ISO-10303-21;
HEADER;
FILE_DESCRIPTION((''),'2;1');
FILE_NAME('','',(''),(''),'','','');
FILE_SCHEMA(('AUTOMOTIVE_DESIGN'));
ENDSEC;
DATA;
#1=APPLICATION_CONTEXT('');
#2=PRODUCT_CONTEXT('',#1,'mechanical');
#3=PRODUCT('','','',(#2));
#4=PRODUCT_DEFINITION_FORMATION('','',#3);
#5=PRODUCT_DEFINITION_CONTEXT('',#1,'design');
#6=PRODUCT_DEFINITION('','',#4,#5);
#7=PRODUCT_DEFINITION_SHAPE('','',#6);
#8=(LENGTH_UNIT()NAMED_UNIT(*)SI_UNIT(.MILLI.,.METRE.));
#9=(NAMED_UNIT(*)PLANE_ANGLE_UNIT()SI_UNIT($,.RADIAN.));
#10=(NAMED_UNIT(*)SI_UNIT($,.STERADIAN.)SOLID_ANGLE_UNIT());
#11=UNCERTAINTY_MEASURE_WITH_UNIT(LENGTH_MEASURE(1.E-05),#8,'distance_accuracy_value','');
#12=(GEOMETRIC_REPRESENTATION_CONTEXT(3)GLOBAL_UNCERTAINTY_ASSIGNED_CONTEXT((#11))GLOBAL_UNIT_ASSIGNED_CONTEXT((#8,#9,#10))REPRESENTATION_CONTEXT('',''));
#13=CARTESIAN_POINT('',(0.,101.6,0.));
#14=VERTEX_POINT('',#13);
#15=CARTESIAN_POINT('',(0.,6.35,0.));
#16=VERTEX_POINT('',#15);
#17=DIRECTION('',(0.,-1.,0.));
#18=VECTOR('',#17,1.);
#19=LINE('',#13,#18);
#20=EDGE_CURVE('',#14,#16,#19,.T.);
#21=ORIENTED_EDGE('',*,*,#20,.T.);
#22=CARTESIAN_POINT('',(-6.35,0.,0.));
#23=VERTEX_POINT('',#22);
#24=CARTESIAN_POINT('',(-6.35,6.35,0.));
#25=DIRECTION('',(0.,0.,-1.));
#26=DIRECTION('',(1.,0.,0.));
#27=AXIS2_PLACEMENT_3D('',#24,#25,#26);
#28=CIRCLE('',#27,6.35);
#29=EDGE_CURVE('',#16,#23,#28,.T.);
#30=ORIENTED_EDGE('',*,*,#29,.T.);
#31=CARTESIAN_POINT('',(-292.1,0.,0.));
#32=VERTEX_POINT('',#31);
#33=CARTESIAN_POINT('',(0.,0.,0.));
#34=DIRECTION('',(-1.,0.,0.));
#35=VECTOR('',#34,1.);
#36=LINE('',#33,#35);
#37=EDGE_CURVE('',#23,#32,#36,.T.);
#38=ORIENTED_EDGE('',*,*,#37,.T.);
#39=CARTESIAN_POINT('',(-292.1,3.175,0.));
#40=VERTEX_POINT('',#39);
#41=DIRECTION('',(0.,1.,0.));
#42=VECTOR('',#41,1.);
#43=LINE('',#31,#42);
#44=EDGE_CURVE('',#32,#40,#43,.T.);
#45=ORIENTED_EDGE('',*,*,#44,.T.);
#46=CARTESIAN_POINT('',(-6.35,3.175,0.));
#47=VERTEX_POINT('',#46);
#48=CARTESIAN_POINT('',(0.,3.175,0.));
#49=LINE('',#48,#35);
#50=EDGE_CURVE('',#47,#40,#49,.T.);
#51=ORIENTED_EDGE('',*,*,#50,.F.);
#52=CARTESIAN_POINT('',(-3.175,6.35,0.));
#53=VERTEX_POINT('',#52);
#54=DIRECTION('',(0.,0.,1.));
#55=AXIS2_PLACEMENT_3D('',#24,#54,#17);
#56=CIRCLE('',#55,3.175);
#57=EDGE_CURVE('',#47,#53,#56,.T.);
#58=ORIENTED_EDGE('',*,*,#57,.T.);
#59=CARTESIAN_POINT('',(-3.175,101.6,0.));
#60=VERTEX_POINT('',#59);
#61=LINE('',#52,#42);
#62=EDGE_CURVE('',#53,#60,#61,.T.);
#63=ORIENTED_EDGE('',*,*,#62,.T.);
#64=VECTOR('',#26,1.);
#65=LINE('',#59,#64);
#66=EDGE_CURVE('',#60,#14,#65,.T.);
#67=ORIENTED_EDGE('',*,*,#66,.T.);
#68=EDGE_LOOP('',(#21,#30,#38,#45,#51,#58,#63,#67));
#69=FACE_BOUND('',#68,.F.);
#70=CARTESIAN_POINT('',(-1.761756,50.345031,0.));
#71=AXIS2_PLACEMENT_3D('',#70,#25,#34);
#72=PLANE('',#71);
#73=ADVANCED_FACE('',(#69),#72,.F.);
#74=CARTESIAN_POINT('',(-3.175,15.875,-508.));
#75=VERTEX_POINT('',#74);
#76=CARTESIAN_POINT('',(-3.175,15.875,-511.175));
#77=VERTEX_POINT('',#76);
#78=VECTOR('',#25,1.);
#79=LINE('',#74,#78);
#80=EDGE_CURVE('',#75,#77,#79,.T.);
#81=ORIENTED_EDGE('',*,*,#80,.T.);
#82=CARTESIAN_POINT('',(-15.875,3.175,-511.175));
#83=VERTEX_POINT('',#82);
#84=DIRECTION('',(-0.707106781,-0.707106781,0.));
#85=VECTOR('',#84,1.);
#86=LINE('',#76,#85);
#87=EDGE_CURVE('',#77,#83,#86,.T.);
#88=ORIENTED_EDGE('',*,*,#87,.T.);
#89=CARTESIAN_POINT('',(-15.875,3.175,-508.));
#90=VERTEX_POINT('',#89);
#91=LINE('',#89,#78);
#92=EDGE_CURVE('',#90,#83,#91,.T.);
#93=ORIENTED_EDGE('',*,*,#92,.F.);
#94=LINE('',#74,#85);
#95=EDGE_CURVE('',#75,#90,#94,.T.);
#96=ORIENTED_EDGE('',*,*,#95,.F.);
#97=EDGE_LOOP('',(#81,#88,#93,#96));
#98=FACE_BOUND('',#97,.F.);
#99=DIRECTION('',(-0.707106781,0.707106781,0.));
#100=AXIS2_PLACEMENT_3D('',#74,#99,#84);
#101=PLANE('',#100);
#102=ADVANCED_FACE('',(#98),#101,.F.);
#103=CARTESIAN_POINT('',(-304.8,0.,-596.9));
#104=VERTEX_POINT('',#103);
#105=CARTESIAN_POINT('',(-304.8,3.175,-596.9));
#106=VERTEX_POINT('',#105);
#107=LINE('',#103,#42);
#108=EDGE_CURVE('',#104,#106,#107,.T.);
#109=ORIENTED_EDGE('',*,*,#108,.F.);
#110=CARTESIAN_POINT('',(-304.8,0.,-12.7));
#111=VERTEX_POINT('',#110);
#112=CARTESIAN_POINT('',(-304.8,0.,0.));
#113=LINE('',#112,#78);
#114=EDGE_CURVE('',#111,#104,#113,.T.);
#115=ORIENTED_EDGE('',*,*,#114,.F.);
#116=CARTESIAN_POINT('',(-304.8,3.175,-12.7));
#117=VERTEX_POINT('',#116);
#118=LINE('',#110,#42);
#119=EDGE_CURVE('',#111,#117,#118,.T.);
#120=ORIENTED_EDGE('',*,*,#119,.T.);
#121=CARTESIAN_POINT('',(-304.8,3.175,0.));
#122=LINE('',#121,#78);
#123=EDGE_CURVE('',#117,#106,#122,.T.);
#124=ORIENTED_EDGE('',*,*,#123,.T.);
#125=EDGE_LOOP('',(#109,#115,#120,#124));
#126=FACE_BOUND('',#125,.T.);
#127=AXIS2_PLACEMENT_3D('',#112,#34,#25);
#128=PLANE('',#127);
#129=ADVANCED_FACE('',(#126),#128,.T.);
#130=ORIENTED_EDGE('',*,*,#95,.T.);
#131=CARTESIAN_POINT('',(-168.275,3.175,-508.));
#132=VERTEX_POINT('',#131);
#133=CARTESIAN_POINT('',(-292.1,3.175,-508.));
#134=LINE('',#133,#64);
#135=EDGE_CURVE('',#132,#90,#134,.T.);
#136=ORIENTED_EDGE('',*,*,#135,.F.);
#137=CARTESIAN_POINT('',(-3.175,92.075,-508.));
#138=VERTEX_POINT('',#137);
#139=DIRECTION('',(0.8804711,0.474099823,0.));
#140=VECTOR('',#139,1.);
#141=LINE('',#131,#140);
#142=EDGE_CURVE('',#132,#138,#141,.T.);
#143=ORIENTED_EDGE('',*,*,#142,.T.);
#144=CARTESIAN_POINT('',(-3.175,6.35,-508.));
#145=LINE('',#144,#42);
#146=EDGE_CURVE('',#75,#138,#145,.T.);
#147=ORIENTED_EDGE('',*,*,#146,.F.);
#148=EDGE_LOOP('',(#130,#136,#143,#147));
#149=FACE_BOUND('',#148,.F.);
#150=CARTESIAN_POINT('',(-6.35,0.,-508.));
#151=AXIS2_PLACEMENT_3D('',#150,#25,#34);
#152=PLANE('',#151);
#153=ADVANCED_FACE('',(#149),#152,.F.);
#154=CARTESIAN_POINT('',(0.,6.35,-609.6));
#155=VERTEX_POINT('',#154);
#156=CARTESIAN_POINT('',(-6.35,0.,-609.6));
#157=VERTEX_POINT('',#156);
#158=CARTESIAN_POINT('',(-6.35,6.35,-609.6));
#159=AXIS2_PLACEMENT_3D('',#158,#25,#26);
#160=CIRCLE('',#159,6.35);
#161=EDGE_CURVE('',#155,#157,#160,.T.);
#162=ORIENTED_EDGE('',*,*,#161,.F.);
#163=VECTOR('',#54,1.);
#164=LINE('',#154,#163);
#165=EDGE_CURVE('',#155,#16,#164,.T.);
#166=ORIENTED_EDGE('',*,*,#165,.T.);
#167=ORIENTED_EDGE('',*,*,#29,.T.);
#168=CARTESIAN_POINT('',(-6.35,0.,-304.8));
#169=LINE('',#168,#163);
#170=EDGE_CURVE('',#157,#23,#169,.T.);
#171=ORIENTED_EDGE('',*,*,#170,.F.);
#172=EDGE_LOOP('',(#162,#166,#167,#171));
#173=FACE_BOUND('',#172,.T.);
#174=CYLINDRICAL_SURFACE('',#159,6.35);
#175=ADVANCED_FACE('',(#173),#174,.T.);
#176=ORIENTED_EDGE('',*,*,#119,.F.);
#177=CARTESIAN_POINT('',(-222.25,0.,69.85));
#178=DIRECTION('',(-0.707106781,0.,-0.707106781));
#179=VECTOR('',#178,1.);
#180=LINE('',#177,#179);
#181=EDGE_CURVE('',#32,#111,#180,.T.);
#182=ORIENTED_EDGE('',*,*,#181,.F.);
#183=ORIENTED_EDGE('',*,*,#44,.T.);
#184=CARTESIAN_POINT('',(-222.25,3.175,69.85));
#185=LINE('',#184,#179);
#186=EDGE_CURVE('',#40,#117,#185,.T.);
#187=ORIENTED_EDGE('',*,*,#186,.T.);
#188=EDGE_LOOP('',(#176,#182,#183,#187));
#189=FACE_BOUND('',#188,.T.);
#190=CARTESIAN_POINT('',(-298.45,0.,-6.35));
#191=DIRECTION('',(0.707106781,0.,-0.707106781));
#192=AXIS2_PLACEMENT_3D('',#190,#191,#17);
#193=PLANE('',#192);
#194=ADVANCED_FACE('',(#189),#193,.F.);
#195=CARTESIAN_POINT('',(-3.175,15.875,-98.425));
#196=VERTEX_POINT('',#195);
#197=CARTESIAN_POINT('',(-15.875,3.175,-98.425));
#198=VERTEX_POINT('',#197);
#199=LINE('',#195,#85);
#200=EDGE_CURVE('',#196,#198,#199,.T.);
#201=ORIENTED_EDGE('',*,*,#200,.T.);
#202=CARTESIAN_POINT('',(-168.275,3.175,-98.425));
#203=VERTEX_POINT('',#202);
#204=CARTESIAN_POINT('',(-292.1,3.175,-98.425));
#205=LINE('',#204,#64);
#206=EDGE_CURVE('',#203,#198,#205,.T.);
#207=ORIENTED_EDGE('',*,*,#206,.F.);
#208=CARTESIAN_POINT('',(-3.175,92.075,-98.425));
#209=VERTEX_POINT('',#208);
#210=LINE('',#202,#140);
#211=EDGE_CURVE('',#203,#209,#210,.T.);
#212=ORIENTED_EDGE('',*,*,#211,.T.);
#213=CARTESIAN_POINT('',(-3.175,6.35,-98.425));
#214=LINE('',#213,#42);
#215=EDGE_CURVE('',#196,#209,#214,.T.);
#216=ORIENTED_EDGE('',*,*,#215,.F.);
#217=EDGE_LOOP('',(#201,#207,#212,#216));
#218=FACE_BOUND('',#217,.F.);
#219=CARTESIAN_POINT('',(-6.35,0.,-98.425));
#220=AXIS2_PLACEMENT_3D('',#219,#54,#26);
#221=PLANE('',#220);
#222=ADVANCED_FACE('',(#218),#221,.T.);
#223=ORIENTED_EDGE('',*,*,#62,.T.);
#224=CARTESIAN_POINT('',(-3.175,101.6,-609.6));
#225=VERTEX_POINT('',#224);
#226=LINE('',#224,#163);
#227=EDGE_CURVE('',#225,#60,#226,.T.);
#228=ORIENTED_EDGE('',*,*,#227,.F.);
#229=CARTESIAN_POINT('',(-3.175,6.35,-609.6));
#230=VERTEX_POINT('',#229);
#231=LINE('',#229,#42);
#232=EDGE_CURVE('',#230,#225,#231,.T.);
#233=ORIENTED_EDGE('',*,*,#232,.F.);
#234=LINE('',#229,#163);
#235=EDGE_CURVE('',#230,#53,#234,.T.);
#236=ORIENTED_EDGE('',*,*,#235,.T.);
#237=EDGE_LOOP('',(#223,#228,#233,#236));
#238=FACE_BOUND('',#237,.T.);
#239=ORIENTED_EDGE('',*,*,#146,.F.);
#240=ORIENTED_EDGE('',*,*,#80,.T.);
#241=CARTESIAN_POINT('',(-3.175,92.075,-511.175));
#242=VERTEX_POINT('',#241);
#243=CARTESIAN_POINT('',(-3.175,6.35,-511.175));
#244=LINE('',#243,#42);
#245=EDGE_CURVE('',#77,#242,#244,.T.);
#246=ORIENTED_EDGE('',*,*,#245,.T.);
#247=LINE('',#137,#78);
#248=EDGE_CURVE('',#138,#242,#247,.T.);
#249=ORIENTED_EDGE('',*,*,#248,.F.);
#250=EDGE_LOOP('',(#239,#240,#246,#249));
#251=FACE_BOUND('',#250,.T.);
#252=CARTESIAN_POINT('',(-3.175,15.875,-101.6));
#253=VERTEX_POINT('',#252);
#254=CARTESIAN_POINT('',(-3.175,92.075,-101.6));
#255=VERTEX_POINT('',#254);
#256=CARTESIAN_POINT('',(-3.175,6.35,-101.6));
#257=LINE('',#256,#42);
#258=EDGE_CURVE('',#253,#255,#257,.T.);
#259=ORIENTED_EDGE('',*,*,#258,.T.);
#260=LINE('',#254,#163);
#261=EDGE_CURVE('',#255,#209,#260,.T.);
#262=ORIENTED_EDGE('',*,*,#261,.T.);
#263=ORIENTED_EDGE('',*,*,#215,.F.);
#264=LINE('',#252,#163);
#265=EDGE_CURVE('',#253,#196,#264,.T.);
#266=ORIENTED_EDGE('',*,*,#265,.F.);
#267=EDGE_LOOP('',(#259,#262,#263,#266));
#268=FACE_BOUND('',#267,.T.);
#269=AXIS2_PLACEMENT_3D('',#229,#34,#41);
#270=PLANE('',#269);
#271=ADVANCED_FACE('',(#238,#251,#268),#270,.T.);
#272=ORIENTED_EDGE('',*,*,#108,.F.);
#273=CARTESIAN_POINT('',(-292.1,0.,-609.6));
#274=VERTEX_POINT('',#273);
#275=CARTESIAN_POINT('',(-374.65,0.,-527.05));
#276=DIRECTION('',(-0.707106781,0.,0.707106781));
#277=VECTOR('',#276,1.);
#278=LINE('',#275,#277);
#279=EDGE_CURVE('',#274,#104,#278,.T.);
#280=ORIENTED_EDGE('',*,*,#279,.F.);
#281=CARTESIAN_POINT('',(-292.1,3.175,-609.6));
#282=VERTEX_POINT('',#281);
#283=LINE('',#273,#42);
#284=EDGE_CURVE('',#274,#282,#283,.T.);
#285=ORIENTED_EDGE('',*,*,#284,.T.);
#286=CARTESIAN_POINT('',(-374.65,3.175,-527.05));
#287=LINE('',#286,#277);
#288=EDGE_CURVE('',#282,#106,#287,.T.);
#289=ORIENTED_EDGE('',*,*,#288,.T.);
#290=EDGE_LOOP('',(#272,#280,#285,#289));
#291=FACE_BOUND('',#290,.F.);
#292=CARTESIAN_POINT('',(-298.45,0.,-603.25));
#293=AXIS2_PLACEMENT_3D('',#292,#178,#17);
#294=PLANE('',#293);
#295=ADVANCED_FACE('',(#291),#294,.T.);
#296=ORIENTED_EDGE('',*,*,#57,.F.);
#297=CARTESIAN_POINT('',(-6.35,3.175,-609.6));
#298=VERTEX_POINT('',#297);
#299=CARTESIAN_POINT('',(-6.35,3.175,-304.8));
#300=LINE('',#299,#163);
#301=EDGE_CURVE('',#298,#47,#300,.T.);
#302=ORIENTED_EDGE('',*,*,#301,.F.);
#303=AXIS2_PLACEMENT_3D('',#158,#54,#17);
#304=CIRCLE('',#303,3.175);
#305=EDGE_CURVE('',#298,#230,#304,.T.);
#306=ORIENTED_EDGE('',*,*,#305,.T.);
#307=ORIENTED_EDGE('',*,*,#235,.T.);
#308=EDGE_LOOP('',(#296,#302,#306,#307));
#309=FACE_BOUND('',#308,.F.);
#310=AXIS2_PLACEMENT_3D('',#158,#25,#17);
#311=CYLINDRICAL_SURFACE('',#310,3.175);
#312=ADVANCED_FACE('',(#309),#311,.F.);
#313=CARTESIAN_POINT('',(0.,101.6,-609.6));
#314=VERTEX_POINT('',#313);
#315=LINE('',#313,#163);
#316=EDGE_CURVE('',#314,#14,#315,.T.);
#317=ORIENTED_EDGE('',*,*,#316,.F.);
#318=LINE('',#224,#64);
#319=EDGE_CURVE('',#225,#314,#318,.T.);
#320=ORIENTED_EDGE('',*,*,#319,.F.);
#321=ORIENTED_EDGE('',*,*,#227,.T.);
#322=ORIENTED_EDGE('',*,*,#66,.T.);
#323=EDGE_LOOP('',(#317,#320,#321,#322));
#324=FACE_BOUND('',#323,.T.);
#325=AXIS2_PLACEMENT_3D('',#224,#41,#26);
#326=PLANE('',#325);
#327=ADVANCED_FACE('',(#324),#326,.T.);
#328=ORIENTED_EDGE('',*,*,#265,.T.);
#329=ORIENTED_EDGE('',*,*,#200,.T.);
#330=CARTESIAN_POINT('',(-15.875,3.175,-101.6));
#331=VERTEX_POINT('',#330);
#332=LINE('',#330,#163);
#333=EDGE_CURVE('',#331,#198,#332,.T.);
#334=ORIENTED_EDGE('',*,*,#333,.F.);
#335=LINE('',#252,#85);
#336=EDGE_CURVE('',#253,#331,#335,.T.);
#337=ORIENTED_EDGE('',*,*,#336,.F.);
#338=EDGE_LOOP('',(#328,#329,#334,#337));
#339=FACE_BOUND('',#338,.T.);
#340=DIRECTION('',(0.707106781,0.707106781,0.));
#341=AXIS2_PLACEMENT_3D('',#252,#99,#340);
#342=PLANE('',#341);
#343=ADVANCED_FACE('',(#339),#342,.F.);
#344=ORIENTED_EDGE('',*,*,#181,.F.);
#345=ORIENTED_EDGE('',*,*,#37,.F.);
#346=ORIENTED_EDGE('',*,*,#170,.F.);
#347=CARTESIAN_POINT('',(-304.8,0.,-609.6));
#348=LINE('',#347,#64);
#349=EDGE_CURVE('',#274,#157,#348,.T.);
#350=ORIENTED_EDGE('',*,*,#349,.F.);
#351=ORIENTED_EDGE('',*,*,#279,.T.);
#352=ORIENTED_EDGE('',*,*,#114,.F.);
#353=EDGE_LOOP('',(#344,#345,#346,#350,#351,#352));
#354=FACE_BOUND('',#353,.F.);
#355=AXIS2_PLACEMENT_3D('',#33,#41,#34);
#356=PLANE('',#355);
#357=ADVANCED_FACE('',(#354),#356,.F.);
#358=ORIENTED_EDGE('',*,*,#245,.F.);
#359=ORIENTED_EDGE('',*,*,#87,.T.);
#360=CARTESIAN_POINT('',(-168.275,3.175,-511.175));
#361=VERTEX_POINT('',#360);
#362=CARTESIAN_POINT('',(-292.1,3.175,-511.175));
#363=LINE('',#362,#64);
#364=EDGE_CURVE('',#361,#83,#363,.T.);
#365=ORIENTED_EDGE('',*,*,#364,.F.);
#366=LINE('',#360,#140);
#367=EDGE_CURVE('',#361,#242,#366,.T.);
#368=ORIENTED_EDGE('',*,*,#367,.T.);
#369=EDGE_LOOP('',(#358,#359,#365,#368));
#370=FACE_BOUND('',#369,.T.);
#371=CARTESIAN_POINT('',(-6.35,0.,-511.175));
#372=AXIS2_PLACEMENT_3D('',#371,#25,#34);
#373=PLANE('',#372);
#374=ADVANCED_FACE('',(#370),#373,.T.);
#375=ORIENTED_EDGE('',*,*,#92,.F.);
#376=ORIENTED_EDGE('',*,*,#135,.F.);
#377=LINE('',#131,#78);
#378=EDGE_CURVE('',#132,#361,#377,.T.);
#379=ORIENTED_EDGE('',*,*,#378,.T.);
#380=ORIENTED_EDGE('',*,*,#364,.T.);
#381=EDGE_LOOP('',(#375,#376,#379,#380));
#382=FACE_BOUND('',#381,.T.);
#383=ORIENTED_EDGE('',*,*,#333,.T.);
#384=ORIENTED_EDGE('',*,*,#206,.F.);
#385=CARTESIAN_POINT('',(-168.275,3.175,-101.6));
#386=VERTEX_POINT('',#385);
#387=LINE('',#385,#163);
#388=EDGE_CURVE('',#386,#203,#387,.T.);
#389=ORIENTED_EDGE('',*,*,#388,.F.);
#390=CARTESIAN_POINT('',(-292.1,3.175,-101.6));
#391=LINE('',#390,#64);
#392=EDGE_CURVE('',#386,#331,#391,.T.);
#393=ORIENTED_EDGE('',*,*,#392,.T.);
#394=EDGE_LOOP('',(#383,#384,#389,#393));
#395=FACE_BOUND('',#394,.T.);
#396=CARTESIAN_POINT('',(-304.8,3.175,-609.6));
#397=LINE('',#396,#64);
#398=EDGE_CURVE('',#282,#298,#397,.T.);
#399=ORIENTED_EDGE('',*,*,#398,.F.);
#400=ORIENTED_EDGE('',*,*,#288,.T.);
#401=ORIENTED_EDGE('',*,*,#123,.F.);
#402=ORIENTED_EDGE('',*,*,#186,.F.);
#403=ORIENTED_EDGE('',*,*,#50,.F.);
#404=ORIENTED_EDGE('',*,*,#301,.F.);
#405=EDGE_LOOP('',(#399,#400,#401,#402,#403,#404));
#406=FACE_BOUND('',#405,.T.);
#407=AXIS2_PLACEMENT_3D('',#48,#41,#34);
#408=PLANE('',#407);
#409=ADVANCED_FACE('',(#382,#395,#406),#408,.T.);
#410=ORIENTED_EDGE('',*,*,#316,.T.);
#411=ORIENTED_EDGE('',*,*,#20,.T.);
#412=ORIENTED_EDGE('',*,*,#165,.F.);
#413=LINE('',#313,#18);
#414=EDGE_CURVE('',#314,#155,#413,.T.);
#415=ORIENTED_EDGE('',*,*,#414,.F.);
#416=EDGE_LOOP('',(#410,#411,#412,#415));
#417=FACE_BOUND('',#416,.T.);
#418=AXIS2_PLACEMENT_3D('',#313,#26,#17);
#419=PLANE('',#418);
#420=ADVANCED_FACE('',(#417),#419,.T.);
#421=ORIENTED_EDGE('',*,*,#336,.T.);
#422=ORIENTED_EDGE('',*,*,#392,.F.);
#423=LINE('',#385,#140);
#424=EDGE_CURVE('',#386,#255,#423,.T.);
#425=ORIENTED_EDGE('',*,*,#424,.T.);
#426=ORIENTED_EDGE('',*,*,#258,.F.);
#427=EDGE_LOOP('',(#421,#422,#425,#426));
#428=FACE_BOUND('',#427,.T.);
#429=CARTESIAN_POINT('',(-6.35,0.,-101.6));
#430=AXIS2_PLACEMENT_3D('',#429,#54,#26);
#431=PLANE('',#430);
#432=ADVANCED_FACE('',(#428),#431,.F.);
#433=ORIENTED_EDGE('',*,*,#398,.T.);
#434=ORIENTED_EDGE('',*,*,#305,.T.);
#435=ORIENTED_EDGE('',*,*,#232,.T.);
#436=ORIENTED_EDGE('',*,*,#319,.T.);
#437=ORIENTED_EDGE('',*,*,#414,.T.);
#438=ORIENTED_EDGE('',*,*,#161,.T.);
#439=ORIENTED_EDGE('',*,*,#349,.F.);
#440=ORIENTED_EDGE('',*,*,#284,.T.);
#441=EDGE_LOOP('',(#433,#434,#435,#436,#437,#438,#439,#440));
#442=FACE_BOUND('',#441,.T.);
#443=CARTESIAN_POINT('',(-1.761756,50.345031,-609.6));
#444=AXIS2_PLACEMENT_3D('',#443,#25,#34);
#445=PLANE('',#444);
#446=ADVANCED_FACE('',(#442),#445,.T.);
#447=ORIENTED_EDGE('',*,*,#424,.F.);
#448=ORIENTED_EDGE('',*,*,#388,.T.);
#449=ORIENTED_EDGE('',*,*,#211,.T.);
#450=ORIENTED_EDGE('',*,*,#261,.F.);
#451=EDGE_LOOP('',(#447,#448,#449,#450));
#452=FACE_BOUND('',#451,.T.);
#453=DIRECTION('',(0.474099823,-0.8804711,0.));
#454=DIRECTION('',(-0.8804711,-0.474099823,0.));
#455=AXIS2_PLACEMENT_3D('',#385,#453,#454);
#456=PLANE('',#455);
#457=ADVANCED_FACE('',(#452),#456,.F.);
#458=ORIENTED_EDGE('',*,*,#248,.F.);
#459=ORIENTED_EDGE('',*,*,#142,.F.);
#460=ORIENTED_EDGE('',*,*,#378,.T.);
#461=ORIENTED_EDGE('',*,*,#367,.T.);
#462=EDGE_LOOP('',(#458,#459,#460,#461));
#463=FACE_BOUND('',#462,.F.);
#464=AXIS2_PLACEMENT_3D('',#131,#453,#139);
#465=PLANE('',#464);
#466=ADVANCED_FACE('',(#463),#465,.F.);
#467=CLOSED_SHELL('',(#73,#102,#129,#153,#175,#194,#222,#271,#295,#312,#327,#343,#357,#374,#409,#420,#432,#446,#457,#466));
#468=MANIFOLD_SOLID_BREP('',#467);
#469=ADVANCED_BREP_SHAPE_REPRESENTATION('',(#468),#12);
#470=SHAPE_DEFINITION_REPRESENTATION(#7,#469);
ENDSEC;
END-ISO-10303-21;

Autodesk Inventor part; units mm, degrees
ref_plane "YZ Plane" through (0, 0, 0) normal (1, 0, 0) x (0, 1, 0)
ref_plane "XZ Plane" through (0, 0, 0) normal (0, 1, 0) x (-1, 0, 0)
ref_plane "XY Plane" through (0, 0, 0) normal (0, 0, 1) x (1, 0, 0)
sketch "Sketch1" plane through (0, 0, 0) normal (0, 1, 0) x (-1, 0, 0)
  line L0 (0, 0) -> (304.8, 0)
  line L1 (304.8, 0) -> (304.8, -609.6)
  line L2 (304.8, -609.6) -> (0, -609.6)
  line L3 (0, -609.6) -> (0, 0)
  dimension "d0" = 609.6
  dimension "d1" = 304.8
extrude "Plate1" add sketch "Sketch1" along normal blind 3.175
sketch "Sketch2" plane through (-3.175, 0, -609.6) normal (1, 0, 0) x (0, 1, 0)
  line L0 (0, 609.6) -> (0, 0)
  line L1 (0, 0) -> (101.6, 0)
  line L2 (101.6, 0) -> (101.6, 609.6)
  line L3 (101.6, 609.6) -> (0, 609.6)
edge flange "Flange1" height 101.6 angle 90 thickness 3.175 bend radius 3.175 thickness toward (1, 0, 0) relief tear relief width 3.175 relief depth 1.5875 edges at (0, 3.175, -304.8) wall of the first edge with corners at (-3.175, 0, 0) (-3.175, 0, -609.6) (-3.175, 101.6, -609.6) (-3.175, 101.6, 0)
bend "Bend1"
corner "Corner1"
chamfer "Chamfer1" distance 12.7 angle 45 2 edges at (-304.8, 1.5875, -609.6) (-304.8, 1.5875, 0)
ref_plane "Work Plane1" through (-6.35, 0, -508) normal (0, 0, -1) x (-1, 0, 0)
sketch "Sketch3" plane through (-6.35, 0, -508) normal (0, 0, -1) x (-1, 0, 0)
  line L0 (-3.175, 6.35) -> (-3.175, 101.6)
  line L1 (-3.175, 15.875) -> (9.525, 3.175)
  line L2 (285.75, 3.175) -> (0, 3.175)
  line L3 (161.925, 3.175) -> (-3.175, 92.075)
  line L4 (-3.175, 92.075) -> (-3.175, 15.875)
  line L5 (9.525, 3.175) -> (161.925, 3.175)
  point P0 (-6.35, 0)
  dimension "d17" = 152.4
  dimension "d18" = 76.2
  dimension "d19" = 12.7
  dimension "d20" = 135
sheet face with bend "Face2" sketch "Sketch3" thickness 3.175 toward (0, 0, -1) bend radius 3.175
bend "Bend2"
ref_plane "Work Plane2" through (-6.35, 0, -304.8) normal (0, 0, -1) x (-1, 0, 0)
mirror "Mirror1" about plane through (-6.35, 0, -304.8) normal (0, 0, -1)
equation "\"d2\" = Thickness"
equation "\"d3\" = BendReliefWidth"
equation "\"d4\" = BendReliefDepth"
equation "\"d5\" = MinimumRemnant"
equation "\"d6\" = TransitionRadius"
equation "\"d9\" = BendRadius"
equation "\"d10\" = CornerReliefSize"
equation "\"d11\" = GapSize"
equation "\"d12\" = JacobiRadiusSize"
equation "\"d21\" = BendRadius"
equation "\"d22\" = BendReliefWidth"
equation "\"d24\" = MinimumRemnant"
equation "\"d23\" = BendReliefDepth"
equation "\"d25\" = TransitionRadius"
equation "\"BendRadius\" = Thickness"
equation "\"BendReliefWidth\" = Thickness"
equation "\"BendReliefDepth\" = 0.5 * Thickness"
equation "\"CornerReliefSize\" = 4 * Thickness"
equation "\"MinimumRemnant\" = 2 * Thickness"
equation "\"TransitionRadius\" = BendRadius"
equation "\"JacobiRadiusSize\" = BendRadius"
equation "\"GapSize\" = Thickness"
equation "\"Thickness\" = 3.175"
properties part number "21015-22-1-6- Work Shelves" material "Steel, Carbon"
